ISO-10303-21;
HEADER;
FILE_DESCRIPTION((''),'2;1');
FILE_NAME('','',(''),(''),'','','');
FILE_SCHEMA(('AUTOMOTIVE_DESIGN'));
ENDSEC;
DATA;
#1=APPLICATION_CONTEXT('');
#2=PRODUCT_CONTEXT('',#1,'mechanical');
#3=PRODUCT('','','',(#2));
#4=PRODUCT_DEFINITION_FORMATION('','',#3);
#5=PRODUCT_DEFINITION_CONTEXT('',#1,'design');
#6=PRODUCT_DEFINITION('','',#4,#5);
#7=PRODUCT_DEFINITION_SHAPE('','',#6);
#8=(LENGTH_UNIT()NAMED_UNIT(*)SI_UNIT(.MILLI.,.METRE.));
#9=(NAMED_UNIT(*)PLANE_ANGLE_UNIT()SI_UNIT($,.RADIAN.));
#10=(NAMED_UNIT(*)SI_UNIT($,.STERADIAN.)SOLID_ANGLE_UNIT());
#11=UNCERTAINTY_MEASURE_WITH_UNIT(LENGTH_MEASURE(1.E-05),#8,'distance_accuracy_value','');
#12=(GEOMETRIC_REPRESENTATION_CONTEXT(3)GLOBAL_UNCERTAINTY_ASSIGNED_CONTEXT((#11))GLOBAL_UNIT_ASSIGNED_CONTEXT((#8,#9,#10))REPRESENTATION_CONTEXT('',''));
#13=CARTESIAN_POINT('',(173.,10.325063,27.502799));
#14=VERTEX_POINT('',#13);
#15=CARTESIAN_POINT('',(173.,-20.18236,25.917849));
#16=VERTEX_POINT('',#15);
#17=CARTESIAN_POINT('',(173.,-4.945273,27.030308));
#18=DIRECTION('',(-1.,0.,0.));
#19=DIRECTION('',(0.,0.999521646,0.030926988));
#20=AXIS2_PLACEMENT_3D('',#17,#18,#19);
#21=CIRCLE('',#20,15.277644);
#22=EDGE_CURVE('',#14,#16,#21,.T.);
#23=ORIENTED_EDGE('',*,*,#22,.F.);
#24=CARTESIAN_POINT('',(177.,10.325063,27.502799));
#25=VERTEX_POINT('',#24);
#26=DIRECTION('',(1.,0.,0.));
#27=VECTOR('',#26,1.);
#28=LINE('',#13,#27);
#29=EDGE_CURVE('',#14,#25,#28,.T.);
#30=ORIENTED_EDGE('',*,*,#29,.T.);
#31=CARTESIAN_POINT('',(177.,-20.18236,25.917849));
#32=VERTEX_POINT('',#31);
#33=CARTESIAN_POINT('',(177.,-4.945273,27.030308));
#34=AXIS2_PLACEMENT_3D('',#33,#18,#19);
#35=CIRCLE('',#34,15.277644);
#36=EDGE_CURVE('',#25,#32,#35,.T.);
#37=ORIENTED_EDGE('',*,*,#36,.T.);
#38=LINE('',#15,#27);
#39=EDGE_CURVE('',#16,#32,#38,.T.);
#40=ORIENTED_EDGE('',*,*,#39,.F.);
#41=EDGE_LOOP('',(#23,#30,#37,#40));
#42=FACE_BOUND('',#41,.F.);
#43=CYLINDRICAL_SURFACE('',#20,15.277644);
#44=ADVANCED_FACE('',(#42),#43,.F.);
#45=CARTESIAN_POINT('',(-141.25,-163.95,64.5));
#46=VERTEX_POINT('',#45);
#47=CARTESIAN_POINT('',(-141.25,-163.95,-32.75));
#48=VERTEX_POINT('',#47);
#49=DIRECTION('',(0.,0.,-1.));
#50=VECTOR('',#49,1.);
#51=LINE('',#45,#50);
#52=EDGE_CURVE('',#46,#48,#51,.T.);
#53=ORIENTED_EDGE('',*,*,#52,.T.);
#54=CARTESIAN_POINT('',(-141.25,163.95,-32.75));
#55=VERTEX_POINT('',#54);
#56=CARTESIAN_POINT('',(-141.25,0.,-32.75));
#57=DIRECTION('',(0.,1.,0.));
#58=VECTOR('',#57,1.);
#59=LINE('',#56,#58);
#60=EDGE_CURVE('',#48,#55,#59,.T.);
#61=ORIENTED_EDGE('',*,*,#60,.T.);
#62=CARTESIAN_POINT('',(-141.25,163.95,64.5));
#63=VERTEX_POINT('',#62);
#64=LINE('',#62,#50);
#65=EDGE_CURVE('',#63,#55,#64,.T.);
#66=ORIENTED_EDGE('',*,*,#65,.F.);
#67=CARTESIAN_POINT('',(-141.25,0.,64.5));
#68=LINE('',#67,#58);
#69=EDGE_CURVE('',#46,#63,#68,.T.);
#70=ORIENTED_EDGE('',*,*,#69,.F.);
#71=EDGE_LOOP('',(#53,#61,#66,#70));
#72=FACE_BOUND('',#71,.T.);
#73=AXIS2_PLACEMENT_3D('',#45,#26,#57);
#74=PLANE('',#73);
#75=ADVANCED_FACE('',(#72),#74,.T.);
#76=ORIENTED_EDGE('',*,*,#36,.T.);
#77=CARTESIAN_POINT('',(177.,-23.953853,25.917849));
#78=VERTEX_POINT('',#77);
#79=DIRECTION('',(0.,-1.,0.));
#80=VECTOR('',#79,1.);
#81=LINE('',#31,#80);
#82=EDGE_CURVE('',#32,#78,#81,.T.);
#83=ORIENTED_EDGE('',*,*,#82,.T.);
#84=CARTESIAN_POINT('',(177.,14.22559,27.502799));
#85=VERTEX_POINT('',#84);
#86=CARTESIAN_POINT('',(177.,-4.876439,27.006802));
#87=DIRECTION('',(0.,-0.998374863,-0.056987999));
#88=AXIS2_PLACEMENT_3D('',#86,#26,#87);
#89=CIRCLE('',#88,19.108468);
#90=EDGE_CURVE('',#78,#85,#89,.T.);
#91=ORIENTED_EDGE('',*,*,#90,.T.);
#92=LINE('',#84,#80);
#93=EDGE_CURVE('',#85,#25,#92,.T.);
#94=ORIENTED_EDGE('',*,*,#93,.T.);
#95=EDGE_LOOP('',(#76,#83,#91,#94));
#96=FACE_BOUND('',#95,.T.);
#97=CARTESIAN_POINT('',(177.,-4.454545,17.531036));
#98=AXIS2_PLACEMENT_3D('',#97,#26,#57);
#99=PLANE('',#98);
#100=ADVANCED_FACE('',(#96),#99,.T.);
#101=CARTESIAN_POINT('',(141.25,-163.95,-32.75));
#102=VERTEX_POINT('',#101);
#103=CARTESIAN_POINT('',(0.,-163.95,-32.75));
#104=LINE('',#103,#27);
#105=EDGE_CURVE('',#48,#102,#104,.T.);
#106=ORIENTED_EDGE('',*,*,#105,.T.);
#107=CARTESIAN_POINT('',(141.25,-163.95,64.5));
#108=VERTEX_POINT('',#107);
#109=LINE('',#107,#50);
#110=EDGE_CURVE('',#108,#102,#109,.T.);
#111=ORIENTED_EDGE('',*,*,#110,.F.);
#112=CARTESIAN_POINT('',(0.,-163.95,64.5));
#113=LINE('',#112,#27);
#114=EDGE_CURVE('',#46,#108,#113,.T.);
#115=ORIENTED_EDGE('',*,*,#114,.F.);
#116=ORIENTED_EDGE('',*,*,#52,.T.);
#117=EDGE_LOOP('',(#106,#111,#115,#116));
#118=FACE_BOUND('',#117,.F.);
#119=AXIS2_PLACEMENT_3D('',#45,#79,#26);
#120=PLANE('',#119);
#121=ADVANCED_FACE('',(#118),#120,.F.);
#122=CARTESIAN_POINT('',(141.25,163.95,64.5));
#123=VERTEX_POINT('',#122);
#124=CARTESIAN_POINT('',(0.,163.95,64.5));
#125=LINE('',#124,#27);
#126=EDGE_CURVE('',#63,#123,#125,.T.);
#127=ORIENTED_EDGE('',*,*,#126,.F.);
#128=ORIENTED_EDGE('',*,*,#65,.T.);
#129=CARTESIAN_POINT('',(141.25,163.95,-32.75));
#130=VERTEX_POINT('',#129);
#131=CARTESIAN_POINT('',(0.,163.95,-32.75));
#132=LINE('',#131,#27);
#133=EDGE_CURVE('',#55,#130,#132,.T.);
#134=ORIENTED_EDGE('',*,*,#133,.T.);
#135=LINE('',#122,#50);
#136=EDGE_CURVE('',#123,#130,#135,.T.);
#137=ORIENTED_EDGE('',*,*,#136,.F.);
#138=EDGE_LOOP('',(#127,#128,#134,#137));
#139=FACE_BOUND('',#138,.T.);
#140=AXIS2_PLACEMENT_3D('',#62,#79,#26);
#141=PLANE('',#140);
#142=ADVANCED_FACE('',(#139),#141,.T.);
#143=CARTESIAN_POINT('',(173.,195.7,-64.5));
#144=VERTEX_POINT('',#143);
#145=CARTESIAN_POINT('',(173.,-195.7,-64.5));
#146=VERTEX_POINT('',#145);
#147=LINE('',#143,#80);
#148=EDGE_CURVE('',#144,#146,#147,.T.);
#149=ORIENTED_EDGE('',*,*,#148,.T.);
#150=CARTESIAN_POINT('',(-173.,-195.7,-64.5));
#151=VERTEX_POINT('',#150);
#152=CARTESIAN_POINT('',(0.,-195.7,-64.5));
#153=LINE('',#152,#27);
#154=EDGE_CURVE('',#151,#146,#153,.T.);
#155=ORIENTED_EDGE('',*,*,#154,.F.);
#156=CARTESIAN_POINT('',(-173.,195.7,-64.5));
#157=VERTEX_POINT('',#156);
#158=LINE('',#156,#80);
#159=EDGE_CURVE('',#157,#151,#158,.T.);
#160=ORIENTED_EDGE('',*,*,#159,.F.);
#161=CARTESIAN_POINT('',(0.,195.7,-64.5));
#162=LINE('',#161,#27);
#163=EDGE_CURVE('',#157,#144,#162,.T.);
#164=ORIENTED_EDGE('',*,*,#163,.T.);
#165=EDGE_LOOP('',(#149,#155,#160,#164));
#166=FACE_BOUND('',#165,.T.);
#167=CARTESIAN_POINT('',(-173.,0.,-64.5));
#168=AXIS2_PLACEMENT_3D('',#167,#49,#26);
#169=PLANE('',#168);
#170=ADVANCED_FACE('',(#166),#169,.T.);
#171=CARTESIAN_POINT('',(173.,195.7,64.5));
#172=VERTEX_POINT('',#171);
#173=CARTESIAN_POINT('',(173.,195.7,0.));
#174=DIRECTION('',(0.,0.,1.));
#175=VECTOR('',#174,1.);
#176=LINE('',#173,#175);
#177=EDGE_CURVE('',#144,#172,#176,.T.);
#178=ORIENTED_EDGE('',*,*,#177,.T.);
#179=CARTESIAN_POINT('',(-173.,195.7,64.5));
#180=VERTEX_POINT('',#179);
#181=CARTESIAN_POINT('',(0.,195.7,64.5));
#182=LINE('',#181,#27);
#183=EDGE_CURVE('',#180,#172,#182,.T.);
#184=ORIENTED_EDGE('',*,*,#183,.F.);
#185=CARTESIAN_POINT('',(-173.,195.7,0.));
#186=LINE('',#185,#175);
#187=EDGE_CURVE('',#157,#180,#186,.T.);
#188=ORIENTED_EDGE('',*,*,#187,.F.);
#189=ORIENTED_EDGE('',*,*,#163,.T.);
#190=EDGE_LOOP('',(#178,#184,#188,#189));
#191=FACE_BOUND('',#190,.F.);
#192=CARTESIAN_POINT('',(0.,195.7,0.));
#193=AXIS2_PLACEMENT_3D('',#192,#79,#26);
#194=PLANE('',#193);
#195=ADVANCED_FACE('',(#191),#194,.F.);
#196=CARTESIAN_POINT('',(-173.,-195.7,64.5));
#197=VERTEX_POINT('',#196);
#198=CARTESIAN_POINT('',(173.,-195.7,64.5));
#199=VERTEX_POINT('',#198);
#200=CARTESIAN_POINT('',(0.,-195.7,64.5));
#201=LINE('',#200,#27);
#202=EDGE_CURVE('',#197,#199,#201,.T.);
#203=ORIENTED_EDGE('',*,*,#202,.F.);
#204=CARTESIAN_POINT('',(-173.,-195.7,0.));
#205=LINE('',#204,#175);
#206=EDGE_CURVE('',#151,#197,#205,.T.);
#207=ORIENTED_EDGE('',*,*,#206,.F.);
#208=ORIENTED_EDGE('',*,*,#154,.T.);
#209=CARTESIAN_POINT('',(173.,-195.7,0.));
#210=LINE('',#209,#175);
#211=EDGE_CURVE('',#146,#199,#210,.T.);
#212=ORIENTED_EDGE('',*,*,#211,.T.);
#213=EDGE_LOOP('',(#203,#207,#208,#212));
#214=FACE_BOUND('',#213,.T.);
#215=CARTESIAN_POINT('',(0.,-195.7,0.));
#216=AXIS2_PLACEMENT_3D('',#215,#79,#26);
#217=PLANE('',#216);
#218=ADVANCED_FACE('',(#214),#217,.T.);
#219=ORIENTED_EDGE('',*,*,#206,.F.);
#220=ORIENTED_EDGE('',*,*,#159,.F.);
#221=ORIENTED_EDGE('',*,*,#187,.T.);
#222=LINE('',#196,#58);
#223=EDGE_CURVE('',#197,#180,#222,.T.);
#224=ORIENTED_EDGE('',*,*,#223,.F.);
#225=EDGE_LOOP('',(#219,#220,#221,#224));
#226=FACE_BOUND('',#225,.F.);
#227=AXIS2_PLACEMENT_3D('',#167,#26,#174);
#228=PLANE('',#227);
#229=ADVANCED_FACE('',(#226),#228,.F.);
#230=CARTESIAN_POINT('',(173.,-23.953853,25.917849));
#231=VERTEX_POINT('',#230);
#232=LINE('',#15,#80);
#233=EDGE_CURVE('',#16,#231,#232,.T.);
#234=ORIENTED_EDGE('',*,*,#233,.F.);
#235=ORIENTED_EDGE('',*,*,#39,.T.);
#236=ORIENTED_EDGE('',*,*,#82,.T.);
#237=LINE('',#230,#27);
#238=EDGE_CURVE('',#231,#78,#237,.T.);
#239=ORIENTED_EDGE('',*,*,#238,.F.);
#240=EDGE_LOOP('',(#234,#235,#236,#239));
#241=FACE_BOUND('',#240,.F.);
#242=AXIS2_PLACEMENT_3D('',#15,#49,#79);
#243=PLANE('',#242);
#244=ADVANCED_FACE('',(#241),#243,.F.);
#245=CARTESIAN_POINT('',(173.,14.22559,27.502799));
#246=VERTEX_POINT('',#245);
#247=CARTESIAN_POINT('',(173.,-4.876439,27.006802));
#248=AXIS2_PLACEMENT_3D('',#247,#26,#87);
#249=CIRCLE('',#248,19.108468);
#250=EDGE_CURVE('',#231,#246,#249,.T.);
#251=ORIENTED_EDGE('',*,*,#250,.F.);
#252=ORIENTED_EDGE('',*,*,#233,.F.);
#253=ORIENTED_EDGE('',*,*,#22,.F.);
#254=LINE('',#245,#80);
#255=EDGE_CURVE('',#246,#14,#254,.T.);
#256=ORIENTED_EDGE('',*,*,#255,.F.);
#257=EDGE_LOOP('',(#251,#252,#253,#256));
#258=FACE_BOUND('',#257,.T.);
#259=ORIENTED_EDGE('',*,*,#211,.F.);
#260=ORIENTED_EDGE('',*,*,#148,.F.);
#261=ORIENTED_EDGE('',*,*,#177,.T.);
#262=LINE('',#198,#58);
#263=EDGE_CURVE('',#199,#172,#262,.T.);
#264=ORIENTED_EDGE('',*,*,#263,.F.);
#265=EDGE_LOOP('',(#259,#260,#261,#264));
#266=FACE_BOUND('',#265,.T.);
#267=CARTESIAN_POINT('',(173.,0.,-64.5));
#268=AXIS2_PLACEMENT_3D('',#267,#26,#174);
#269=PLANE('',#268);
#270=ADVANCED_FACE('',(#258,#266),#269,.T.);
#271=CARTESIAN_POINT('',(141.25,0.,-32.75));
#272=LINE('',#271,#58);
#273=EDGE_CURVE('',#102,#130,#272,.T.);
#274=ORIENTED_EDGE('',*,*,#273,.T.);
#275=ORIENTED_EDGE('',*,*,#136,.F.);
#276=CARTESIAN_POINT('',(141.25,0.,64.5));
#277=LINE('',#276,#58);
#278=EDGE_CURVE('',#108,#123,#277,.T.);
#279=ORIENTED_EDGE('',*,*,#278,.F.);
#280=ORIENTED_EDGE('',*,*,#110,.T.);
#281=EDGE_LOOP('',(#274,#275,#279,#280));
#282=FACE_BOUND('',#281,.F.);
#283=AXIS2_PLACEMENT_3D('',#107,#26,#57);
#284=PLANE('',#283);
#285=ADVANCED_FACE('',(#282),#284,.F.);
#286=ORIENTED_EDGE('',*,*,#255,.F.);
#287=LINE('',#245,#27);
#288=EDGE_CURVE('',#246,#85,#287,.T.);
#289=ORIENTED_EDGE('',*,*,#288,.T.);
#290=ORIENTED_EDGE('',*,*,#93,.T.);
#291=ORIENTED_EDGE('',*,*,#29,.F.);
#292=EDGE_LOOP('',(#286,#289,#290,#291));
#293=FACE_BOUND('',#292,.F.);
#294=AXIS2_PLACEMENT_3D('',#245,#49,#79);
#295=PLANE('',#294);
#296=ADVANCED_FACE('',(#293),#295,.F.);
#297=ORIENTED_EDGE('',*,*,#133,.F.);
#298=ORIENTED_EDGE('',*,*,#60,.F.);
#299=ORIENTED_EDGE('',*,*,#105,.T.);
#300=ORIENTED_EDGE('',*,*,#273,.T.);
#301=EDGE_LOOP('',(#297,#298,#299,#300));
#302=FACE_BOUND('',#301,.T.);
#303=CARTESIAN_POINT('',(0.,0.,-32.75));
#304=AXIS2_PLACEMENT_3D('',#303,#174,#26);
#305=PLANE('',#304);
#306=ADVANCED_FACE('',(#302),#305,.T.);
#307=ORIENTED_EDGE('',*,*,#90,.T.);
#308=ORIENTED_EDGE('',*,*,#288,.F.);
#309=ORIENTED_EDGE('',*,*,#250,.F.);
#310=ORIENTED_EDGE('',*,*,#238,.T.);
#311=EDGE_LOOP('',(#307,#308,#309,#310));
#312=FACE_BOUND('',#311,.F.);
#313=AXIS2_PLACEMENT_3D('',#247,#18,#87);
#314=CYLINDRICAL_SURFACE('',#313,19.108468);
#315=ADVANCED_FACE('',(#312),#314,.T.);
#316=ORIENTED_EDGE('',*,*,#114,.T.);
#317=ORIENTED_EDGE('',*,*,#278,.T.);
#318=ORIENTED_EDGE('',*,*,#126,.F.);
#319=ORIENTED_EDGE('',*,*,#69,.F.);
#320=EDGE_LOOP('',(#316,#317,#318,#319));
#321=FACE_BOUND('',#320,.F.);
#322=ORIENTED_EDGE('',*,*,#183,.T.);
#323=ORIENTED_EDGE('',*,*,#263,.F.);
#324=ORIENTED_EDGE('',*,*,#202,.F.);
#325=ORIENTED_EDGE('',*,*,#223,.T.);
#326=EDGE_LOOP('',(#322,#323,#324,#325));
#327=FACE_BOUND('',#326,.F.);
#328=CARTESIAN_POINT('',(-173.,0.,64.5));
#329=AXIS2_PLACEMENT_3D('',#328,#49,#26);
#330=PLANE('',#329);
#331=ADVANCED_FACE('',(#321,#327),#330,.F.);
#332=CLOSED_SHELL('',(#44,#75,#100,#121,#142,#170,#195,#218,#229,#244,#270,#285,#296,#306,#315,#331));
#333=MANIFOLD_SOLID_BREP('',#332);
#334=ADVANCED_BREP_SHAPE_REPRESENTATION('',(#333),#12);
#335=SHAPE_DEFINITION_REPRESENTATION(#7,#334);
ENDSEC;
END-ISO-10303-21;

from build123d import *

# Parameters (mm, degrees)
F0_W     = 346
F0_H     = 129
F1_DEPTH = 195.7
F2_W     = 282.5
F2_H     = 327.9
F3_DEPTH = 97.25
F5_DEPTH = 4


# Not quite as in the source:
# - a feature names something its author has since deleted; it is built from what else it names


with BuildPart() as f1:
    # F0 (on Front) → F1 (new body, symmetric)
    with BuildSketch(Plane.XZ):
        Rectangle(F0_W, F0_H)
    extrude(amount=F1_DEPTH, both=True)

    # F2 (on face) → F3 (cut)
    with BuildSketch(Plane.XY.offset(64.5)):
        Rectangle(F2_W, F2_H)
    extrude(amount=-F3_DEPTH, mode=Mode.SUBTRACT)

    # F4 (on face) → F5 (join)
    with BuildSketch(Plane.YZ.offset(173)):
        with BuildLine():
            Line((-20.1823599637, 25.9178485721), (-23.953853175, 25.9178485721))
            ThreePointArc((-23.953853175, 25.9178485721), (-4.0838683271, 7.9147781718), (14.2255900428, 27.5027994066))
            Line((14.2255900428, 27.5027994066), (10.32506302, 27.5027994066))
            ThreePointArc((10.32506302, 27.5027994066), (-4.1526228185, 11.7732405564), (-20.1823599637, 25.9178485721))
        make_face()
    extrude(amount=F5_DEPTH)


solid = f1.part
